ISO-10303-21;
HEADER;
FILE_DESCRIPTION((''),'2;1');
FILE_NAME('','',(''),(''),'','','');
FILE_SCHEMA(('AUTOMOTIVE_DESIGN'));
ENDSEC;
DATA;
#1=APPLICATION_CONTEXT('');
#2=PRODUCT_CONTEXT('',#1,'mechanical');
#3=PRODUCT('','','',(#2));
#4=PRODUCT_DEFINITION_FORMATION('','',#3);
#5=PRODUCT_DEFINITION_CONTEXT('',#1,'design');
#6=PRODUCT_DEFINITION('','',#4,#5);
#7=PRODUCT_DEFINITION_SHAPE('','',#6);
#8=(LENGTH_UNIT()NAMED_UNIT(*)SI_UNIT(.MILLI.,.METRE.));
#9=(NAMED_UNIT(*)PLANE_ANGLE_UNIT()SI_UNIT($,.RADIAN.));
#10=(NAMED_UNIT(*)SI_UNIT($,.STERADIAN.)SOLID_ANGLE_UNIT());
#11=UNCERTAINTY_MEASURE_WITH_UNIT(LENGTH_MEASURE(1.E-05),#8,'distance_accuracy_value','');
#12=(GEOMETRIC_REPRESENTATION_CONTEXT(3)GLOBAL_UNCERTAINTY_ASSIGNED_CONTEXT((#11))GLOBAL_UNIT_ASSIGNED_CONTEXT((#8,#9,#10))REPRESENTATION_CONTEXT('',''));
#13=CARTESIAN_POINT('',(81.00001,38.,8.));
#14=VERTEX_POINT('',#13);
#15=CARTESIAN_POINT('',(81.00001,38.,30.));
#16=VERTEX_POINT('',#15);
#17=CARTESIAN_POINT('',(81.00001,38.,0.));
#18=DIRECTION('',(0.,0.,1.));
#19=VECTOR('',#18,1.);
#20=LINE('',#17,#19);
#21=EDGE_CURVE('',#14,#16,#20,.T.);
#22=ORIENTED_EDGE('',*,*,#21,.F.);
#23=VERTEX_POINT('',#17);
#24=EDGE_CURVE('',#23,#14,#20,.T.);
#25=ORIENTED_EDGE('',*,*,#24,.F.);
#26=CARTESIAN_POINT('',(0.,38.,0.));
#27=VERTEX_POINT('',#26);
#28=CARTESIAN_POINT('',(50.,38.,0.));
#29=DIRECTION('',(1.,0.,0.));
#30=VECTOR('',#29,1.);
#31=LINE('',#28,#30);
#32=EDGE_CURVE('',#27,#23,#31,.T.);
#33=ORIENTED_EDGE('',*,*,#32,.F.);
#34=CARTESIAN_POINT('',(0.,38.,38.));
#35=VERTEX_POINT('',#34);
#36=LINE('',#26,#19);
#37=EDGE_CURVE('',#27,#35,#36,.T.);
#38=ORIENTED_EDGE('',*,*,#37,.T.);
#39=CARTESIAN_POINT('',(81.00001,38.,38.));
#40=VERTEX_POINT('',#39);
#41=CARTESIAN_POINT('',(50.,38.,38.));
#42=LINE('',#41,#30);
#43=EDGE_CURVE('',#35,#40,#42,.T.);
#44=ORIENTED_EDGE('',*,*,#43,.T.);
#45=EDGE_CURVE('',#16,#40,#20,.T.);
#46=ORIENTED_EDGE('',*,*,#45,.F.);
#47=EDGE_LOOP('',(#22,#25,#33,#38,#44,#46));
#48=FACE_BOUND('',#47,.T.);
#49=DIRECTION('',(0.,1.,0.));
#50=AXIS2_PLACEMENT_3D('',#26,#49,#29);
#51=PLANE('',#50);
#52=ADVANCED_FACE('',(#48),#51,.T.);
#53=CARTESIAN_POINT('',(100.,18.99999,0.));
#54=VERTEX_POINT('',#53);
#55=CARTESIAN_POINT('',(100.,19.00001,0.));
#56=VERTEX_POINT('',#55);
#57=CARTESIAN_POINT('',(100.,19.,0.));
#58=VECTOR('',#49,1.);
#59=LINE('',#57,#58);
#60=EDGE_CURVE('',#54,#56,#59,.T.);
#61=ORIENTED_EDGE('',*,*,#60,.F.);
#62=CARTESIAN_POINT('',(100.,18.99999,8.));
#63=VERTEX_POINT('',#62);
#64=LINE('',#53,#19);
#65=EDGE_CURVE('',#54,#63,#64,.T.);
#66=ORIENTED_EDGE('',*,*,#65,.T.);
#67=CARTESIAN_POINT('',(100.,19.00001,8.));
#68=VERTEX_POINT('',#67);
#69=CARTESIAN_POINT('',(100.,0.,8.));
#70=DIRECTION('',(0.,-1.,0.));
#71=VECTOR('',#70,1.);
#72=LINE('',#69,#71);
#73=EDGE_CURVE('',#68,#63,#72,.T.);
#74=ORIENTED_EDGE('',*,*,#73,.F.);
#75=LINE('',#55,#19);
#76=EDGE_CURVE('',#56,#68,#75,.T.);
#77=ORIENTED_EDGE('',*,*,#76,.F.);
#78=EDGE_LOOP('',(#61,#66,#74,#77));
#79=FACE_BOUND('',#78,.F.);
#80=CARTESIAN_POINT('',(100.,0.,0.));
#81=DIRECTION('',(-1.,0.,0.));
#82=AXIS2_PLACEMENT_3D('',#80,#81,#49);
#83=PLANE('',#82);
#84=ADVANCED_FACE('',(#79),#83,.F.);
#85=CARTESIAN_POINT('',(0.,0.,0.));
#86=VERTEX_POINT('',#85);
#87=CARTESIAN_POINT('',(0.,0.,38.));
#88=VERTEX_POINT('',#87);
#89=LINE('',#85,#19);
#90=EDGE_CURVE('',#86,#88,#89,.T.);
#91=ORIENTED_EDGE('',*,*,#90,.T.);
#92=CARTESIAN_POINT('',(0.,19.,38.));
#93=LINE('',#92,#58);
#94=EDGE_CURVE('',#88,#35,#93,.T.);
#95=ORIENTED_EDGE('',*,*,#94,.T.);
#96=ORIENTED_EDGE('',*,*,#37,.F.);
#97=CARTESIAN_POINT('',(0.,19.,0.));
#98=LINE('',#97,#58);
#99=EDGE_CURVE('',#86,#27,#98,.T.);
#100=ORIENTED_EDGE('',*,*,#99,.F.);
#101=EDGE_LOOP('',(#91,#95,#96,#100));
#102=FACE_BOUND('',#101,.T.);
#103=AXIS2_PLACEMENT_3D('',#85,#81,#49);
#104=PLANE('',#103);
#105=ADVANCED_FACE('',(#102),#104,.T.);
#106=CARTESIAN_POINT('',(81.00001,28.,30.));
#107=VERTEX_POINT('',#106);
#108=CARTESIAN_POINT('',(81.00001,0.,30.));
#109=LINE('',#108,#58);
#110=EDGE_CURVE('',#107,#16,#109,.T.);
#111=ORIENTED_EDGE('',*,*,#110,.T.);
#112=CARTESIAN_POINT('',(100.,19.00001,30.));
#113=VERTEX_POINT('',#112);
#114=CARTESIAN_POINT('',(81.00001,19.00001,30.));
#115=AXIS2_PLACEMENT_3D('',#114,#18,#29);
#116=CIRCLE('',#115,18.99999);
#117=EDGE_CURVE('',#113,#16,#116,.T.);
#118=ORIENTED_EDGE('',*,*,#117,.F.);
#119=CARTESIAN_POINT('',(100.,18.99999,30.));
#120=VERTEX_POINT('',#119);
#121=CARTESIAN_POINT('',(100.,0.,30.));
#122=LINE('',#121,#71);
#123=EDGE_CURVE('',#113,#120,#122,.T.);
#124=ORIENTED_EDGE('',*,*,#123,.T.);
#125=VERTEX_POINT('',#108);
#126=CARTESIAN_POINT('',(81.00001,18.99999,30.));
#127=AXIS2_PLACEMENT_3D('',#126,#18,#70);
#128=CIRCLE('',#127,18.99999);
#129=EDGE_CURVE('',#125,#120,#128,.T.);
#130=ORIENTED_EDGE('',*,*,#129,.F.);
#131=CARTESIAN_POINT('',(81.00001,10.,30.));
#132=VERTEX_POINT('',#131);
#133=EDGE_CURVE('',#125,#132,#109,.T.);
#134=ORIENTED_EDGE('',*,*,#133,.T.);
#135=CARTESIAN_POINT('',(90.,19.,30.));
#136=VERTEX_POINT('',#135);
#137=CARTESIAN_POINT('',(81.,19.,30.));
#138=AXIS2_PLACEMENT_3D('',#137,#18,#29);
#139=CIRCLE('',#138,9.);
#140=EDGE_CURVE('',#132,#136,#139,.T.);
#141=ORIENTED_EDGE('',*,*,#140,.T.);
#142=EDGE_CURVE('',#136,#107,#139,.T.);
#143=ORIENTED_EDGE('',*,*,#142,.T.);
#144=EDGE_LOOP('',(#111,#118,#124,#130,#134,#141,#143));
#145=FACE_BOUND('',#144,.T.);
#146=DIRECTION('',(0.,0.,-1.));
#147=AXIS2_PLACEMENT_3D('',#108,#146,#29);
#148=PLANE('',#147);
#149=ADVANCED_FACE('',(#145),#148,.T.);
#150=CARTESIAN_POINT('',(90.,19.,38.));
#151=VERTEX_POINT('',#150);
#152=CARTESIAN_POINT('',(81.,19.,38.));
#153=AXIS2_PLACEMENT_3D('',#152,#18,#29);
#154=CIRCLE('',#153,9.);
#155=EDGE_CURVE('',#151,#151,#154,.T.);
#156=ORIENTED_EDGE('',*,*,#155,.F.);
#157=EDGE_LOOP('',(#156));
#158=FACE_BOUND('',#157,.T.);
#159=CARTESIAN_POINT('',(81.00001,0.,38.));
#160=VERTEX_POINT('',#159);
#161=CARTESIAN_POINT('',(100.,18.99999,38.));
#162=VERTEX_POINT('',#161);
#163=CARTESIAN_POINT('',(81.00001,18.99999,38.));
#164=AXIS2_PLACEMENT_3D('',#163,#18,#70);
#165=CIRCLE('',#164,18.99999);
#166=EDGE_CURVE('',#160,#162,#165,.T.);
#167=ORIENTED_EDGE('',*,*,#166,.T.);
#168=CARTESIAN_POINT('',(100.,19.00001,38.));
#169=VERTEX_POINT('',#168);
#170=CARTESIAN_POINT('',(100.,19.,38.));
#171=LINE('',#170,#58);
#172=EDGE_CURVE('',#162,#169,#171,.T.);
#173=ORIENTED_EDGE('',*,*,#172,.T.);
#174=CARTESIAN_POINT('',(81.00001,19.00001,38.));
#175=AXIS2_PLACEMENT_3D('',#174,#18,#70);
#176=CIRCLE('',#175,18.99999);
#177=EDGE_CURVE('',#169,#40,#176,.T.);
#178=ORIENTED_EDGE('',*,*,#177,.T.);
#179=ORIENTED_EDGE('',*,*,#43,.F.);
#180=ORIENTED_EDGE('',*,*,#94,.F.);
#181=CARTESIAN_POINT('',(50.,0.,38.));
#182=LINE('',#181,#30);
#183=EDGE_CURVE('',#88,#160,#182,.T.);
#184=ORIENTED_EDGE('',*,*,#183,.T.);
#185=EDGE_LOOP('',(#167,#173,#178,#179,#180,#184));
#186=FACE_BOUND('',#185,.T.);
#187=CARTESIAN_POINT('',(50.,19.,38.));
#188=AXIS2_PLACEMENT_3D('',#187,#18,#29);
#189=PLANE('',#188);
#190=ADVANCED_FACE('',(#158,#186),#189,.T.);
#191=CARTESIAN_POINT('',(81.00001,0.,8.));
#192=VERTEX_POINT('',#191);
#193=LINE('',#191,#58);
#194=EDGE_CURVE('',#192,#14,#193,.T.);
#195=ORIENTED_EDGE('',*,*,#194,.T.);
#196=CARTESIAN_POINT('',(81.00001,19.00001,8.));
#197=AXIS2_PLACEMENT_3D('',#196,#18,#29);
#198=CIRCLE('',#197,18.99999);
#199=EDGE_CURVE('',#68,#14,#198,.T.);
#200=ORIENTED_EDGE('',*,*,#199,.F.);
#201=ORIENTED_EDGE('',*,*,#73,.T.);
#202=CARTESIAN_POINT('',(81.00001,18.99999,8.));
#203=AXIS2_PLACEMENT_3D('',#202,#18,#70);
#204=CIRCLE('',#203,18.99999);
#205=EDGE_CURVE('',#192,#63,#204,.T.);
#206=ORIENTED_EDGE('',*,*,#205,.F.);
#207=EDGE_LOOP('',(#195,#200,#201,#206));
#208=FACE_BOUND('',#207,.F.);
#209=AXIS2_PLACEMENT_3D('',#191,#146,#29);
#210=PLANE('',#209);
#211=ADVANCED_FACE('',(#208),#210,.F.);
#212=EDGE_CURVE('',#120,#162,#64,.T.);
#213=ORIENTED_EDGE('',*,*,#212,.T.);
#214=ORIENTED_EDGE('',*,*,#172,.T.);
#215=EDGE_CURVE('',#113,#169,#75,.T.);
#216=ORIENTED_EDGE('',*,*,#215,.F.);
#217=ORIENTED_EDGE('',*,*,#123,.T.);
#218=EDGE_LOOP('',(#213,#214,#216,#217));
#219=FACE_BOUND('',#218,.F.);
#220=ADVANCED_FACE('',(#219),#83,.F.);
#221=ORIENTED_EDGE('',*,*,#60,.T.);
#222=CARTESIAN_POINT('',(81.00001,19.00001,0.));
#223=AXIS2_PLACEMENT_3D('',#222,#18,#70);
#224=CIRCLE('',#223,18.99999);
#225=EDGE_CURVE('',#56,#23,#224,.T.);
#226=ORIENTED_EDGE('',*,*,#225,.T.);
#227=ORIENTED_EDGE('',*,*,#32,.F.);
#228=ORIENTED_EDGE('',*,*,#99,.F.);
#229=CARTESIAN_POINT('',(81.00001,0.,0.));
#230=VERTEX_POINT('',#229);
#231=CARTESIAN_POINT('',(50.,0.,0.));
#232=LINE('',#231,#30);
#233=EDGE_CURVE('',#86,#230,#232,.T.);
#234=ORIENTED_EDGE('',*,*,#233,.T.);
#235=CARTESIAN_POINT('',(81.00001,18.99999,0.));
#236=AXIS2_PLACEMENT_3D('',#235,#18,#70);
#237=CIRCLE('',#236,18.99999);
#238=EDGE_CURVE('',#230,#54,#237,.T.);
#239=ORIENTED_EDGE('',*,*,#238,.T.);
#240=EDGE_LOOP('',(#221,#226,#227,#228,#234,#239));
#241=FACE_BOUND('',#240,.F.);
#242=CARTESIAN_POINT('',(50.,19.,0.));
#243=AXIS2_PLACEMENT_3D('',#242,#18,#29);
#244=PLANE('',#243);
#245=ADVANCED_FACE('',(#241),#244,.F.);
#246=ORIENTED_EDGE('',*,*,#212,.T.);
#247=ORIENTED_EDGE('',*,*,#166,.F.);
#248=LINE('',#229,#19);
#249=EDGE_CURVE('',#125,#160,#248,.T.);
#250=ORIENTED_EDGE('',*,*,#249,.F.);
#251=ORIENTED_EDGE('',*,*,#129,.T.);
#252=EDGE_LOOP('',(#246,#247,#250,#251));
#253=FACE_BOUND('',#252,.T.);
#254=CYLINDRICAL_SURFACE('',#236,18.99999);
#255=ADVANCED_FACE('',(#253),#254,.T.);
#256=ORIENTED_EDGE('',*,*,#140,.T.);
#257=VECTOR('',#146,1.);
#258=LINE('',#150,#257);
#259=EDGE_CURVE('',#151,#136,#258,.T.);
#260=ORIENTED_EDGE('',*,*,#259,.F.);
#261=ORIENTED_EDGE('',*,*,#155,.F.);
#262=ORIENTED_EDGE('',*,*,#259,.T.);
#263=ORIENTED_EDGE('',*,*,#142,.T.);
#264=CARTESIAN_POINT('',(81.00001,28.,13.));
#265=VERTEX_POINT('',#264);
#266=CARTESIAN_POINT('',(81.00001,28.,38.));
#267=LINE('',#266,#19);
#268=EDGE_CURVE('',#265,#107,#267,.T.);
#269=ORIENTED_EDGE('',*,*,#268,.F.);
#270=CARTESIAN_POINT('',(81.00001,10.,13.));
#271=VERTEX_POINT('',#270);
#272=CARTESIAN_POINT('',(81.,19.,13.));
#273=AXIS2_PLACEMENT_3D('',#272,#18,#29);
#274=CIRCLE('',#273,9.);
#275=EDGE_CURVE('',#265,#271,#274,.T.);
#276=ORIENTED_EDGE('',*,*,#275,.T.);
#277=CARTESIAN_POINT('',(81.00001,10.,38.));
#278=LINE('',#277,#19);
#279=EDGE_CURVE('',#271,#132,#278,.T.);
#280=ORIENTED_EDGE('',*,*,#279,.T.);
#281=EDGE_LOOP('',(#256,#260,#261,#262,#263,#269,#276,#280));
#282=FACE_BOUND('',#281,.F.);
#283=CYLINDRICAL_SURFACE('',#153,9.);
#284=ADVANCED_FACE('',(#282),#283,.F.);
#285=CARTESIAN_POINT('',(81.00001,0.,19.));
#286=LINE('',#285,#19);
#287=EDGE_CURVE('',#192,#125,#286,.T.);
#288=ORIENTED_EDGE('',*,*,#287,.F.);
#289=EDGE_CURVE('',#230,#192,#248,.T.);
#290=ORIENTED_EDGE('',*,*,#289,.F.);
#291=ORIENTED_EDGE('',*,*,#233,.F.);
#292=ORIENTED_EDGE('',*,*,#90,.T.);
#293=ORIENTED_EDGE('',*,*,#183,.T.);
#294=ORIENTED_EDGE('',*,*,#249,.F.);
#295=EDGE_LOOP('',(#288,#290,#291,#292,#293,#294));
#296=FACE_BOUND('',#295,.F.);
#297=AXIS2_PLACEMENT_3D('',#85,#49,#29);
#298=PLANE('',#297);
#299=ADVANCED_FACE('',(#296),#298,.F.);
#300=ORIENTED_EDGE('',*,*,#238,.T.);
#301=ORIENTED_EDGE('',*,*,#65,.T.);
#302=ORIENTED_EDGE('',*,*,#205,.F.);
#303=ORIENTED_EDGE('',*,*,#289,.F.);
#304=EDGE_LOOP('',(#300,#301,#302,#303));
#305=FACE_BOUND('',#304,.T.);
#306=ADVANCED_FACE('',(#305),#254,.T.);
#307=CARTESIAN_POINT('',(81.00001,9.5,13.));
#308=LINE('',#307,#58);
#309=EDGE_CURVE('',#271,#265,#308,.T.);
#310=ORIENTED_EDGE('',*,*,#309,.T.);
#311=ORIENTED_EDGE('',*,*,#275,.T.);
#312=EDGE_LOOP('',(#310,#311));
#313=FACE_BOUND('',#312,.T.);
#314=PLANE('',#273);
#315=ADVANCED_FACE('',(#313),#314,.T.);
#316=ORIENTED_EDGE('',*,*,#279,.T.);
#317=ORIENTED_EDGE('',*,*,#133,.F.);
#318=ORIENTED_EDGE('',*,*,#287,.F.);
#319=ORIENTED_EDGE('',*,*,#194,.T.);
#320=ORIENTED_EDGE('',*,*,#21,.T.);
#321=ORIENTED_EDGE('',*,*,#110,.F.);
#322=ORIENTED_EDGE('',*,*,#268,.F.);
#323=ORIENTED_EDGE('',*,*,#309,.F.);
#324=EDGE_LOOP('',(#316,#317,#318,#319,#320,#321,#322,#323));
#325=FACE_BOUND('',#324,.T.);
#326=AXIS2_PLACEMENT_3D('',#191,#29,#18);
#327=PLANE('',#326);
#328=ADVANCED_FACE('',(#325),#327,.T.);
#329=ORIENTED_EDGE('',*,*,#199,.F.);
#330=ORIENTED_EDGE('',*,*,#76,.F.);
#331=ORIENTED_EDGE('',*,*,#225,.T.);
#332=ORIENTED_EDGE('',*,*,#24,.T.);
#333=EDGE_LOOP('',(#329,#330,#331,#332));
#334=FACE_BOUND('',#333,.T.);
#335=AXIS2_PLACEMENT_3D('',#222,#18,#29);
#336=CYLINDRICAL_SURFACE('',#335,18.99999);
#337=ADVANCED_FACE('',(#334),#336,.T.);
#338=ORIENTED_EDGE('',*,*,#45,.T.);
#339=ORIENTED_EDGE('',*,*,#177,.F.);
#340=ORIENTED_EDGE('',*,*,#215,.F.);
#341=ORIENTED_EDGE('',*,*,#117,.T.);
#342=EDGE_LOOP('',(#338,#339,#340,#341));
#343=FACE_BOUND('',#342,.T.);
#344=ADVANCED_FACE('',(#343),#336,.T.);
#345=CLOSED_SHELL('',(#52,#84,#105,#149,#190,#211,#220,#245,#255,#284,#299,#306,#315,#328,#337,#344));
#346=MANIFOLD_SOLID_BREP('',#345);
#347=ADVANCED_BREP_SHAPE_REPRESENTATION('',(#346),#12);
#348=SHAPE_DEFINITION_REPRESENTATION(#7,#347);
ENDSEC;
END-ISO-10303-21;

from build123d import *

# Parameters (mm, degrees)
F0_W     = 100
F0_H     = 38
F1_DEPTH = 38
F2_R     = 18.99999
F3_R     = 9
F4_DEPTH = 25
F5_W     = 20.3221625665
F5_H     = 22
F6_DEPTH = 38.001


# Not quite as in the source:
# - a fillet or chamfer is up to 0.001 mm smaller than in the source, because OpenCascade refuses the exact size


with BuildPart() as f1:
    # F0 (on Top) → F1 (new body)
    with BuildSketch(Plane.XY):
        with Locations((50, 19)):
            Rectangle(F0_W, F0_H)
    extrude(amount=F1_DEPTH)

    # F2 (radius 19 in the source; OpenCascade refuses exactly that, so slightly less here)
    f2_edges = [f1.edges().sort_by_distance(p)[0] for p in [
        (100, 0, 19),
        (100, 38, 19),
    ]]
    fillet(f2_edges, radius=F2_R)

    # F3 (on face) → F4 (cut)
    with BuildSketch(Plane.XY.offset(38)):
        with Locations((81, 19)):
            Circle(F3_R)
    extrude(amount=-F4_DEPTH, mode=Mode.SUBTRACT)

    # F5 (on face) → F6 (cut, through all)
    with BuildSketch(Plane.XZ):
        with Locations((91.1610912833, 19)):
            Rectangle(F5_W, F5_H)
    extrude(amount=-F6_DEPTH, mode=Mode.SUBTRACT)


solid = f1.part
